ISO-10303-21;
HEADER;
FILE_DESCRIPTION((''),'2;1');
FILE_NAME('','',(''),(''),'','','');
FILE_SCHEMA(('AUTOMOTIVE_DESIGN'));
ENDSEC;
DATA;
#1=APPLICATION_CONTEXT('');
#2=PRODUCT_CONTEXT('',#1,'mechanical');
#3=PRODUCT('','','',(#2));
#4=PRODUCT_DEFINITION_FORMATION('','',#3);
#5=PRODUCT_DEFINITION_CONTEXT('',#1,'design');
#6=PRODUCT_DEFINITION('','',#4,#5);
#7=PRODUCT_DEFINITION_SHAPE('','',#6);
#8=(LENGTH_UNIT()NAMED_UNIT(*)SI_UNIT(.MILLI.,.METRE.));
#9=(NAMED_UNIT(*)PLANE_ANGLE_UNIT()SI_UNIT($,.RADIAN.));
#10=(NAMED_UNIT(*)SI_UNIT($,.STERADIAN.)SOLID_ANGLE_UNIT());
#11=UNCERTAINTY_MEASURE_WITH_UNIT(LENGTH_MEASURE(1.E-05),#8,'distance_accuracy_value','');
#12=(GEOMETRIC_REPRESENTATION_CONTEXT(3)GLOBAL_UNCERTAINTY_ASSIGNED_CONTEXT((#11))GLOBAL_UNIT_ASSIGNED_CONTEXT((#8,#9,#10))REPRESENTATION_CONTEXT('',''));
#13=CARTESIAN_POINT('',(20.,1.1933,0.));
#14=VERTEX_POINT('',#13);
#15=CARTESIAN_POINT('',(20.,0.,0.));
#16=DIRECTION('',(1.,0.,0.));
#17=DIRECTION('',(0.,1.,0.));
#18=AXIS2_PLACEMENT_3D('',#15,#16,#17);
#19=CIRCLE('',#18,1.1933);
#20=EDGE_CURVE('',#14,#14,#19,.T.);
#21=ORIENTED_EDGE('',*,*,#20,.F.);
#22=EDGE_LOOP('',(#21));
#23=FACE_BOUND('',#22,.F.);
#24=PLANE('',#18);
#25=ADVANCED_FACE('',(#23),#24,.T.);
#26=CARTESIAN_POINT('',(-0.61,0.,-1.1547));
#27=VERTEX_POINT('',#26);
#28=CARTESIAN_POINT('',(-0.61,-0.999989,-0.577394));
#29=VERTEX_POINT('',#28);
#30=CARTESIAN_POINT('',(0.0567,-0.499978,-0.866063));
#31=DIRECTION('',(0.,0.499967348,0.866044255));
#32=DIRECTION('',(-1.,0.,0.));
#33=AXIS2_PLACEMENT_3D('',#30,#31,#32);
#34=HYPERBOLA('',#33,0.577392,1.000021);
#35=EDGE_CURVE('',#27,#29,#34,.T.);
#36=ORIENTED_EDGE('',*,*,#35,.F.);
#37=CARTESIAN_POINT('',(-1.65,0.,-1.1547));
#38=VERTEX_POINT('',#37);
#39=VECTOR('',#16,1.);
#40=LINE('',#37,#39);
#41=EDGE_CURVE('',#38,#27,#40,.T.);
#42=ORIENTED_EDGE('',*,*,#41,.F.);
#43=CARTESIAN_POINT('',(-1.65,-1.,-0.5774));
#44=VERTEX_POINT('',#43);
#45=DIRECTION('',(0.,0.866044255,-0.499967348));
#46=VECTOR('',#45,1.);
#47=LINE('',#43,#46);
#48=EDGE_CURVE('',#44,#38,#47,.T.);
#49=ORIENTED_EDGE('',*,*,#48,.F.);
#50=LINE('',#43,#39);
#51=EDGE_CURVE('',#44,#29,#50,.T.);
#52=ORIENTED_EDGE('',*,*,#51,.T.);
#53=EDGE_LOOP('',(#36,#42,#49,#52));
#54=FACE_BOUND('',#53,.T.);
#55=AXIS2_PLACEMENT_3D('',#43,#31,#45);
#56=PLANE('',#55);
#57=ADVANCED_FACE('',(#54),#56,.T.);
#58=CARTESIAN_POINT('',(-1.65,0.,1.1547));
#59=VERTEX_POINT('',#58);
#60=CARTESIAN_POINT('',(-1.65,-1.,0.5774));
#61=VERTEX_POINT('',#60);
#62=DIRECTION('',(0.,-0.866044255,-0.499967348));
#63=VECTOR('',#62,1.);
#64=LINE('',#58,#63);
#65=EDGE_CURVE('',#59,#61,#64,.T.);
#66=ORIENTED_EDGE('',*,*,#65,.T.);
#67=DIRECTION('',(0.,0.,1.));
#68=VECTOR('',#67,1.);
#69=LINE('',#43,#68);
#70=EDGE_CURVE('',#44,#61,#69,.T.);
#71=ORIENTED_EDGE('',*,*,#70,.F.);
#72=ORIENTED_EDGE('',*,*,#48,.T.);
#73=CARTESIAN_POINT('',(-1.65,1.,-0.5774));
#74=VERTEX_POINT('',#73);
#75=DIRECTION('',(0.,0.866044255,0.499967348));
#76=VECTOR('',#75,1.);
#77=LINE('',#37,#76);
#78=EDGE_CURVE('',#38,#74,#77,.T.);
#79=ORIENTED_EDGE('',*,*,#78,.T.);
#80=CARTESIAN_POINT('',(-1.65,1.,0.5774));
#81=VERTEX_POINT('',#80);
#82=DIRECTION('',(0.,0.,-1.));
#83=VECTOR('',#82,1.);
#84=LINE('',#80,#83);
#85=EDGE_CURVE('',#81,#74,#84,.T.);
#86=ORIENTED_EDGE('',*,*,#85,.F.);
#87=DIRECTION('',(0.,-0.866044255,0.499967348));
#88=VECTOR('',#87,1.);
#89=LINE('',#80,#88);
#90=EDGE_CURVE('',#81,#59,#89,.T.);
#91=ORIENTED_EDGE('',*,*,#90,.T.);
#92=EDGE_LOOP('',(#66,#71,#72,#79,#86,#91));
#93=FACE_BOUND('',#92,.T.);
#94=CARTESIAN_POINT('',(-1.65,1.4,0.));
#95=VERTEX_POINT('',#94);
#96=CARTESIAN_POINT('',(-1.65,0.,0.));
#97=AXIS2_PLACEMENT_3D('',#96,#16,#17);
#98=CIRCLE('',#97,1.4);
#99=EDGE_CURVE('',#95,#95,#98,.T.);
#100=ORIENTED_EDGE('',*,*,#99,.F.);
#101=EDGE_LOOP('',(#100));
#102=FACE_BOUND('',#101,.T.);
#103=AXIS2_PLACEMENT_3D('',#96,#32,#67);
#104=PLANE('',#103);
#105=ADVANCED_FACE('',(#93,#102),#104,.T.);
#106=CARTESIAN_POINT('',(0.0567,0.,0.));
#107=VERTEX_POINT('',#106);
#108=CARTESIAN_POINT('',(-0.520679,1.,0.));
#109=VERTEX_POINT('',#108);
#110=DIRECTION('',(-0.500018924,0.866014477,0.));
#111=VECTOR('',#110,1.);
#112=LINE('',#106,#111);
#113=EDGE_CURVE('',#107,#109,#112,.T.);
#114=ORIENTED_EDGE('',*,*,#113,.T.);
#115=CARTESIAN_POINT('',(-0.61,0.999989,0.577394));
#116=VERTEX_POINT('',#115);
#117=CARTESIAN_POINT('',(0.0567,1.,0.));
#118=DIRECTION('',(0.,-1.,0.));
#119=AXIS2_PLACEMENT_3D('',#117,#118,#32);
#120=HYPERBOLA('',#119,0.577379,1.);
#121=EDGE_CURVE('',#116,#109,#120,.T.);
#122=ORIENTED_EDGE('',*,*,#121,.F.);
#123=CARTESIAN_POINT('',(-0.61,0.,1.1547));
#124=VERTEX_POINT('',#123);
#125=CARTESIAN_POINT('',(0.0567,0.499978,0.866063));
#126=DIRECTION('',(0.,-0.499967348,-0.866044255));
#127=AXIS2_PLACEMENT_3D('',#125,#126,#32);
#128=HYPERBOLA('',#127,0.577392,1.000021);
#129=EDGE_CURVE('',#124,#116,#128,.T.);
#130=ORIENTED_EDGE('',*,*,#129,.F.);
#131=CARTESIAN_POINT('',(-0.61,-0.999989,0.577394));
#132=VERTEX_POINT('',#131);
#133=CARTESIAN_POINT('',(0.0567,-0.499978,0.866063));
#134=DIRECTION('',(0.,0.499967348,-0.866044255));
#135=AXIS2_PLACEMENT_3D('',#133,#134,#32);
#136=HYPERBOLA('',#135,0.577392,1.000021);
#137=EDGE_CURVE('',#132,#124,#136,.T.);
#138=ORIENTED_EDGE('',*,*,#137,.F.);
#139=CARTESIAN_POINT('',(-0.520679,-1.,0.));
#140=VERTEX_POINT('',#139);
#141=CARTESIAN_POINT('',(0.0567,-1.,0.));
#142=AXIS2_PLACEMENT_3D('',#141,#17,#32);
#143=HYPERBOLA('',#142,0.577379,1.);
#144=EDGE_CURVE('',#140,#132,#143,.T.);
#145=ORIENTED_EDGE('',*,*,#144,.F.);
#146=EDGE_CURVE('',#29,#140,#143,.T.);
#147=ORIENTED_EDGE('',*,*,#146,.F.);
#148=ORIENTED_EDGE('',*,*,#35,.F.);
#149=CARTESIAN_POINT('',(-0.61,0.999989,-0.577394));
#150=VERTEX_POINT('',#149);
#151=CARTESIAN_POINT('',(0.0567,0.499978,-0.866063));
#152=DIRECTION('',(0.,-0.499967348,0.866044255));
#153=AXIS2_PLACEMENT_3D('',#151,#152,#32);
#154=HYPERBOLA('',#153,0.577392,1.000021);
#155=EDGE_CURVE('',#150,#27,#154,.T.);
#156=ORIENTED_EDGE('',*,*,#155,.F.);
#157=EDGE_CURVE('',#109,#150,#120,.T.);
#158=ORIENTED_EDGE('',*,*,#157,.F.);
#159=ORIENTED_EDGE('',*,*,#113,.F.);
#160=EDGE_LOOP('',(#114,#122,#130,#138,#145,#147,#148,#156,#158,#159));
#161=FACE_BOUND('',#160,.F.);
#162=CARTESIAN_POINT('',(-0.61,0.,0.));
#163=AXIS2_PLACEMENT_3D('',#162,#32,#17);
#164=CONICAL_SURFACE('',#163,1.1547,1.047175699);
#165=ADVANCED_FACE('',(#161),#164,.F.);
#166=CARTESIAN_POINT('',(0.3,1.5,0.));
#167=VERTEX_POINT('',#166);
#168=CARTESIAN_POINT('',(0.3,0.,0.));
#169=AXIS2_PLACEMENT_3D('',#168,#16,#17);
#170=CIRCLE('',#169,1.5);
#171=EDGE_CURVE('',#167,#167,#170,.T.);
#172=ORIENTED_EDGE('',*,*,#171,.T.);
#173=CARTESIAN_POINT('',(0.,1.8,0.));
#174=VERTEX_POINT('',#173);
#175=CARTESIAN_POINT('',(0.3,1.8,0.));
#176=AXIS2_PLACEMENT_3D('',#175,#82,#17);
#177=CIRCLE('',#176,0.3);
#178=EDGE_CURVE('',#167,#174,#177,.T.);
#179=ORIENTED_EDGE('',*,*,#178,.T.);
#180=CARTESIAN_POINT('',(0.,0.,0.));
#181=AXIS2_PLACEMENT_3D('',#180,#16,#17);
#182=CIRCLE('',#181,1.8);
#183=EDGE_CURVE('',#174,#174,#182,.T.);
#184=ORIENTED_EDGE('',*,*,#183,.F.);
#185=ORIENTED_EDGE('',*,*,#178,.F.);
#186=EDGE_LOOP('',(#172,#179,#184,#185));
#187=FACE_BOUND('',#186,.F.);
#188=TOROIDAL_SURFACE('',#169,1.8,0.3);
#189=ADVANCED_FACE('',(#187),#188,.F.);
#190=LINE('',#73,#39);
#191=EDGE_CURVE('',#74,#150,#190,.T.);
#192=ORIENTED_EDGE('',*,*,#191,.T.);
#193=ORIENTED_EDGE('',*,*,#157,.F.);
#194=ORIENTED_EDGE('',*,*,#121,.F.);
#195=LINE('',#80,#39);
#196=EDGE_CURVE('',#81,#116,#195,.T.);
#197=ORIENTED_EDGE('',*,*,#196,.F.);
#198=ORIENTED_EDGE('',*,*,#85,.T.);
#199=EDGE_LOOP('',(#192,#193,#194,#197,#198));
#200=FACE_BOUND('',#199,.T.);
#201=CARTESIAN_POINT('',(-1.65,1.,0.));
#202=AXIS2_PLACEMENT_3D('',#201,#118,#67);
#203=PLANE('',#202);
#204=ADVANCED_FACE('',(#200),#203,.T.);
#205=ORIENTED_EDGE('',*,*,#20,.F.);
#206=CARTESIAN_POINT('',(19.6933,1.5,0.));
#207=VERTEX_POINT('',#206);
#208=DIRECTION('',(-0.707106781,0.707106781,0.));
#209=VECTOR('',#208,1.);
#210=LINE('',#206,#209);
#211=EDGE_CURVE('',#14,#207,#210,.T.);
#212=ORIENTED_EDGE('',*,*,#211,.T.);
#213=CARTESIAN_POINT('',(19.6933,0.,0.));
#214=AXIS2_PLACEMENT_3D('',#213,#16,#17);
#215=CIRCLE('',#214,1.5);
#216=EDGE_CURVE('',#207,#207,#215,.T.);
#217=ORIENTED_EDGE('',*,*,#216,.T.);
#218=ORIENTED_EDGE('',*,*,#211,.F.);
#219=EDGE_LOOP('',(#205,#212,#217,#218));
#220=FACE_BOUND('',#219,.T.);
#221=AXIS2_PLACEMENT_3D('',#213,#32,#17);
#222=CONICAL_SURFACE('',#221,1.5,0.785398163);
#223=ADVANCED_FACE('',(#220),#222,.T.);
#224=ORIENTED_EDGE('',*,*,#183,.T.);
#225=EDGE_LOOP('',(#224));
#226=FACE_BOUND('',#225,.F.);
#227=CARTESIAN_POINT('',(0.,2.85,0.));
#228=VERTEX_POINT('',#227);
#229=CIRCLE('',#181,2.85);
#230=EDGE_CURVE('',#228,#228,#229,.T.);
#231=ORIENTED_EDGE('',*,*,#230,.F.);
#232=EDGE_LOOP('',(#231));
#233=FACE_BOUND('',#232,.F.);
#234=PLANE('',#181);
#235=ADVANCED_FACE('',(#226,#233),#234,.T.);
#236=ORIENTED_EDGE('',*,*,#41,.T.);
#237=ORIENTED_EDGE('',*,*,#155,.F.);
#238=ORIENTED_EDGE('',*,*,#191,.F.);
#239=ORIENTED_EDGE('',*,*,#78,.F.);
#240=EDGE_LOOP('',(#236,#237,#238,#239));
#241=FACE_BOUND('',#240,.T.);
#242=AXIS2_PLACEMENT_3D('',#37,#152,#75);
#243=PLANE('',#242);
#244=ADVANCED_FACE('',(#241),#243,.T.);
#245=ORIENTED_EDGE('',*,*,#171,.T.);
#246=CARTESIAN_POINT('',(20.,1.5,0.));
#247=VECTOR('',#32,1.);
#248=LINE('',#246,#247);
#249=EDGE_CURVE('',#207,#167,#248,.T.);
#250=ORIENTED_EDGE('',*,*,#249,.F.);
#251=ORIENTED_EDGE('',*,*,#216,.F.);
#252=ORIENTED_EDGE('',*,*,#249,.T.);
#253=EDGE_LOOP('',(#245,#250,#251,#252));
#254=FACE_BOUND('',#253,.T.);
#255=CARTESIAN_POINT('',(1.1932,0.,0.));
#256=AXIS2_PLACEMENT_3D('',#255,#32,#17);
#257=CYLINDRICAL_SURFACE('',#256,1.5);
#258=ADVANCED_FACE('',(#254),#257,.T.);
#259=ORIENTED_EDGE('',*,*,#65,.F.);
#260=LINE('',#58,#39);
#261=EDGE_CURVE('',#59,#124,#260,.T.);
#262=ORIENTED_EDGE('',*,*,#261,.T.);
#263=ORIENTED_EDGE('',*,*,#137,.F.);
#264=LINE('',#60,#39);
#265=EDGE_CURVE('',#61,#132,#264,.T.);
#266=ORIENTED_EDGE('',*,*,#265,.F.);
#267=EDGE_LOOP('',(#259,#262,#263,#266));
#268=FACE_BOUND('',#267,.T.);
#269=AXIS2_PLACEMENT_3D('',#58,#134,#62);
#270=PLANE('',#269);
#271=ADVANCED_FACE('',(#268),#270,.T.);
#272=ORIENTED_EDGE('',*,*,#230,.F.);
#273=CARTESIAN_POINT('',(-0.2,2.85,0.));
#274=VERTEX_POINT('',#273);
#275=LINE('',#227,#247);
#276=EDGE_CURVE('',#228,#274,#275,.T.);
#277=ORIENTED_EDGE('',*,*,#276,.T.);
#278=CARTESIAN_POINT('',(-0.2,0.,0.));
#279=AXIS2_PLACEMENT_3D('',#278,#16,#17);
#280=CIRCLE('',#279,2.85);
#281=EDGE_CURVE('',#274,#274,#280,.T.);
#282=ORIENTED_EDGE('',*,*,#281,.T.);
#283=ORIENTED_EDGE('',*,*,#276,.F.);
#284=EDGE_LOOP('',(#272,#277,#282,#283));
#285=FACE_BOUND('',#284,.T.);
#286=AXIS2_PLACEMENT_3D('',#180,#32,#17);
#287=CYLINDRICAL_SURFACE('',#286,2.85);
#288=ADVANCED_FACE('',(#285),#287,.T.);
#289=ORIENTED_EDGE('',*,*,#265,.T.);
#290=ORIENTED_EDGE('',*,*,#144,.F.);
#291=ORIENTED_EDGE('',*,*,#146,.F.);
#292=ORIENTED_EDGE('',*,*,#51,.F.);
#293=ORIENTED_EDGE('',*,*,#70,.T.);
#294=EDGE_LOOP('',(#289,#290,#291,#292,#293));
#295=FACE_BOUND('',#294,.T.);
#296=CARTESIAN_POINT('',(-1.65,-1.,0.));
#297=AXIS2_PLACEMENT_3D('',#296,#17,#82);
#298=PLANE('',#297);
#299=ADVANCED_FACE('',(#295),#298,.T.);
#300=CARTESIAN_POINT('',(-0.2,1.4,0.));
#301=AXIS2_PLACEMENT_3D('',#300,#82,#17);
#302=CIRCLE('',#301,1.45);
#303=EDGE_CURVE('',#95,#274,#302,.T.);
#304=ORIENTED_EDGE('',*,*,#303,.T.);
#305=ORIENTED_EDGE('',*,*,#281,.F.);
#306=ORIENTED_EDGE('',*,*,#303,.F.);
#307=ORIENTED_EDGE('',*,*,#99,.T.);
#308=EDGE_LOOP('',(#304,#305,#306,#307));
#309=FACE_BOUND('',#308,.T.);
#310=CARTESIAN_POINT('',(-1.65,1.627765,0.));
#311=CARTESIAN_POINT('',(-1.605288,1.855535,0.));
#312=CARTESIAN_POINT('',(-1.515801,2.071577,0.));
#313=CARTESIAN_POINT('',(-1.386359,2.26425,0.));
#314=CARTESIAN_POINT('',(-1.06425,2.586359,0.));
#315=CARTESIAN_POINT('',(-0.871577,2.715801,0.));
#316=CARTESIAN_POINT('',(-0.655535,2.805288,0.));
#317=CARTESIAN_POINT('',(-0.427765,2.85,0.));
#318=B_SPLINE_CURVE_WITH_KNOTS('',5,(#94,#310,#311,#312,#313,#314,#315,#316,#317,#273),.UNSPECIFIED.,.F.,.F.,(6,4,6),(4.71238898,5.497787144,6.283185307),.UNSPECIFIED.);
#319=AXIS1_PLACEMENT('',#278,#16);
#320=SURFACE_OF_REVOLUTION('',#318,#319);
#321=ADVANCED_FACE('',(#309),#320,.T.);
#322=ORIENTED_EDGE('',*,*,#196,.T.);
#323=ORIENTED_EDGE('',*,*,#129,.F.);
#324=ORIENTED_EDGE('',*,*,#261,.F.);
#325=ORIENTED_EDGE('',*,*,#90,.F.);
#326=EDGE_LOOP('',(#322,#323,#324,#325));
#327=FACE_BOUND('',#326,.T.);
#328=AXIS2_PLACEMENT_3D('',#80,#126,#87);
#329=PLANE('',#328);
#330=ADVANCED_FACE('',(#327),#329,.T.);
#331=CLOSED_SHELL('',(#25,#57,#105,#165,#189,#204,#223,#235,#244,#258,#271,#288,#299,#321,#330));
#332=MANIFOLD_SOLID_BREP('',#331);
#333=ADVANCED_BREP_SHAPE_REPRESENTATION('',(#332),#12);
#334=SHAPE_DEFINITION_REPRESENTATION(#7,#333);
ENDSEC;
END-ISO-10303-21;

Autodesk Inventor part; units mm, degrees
ref_plane "YZ Plane" through (0, 0, 0) normal (1, 0, 0) x (0, 1, 0)
ref_plane "XZ Plane" through (0, 0, 0) normal (0, 1, 0) x (-1, 0, 0)
sketch "Sketch1" plane through (0, 0, 0) normal (0, 0, 1) x (1, 0, 0)
  line L0 (0.0567, 0) -> (20, 0)
  line L1 (20, 0) -> (20, 1.5)
  line L2 (20, 1.5) -> (1.5, 1.5)
  line L3 (1.5, 1.5) -> (1.1932, 1.5)
  line L4 (1.1932, 1.5) -> (0, 1.5)
  line L5 (0, 1.5) -> (0, 2.85)
  line L6 (0, 2.85) -> (-1.65, 2.85)
  line L7 (-1.65, 2.85) -> (-1.65, 1.1547)
  line L8 (-1.65, 1.1547) -> (-0.61, 1.1547)
  line L9 (-0.61, 1.1547) -> (0.0567, 0)
  line L10 (-5.98, 0) -> (24.33, 0) projected
  line L11 (0, -0.57) -> (0, 3.42) projected
  line L12 (1.5, 1.5) -> (0, 1.5) construction
  dimension "d1" = 18.5
  dimension "d2" = 0.3068
  dimension "d3" = 1.65
  dimension "d4" = 1.04
  dimension "d5" = 60
  dimension "d6" = 3
  dimension "d7" = 3
  dimension "d8" = 2.3094
  dimension "d9" = 5.7
  dimension "d26" = 20
revolve "Body" add sketch "Sketch1" angle 360 about axis through (0.0567, 0, 0) along (1, 0, 0) contours L9 L11 L4 L3 L2 L1 L0 | L9 L8 L7 L6 L5 L11
sketch "Sketch2" plane through (-1.65, 0, 0) normal (-1, 0, 0) x (0, 0, 1)
  circle A0 centre (0, 0) radius 1.1547 projected
  line L0 (0, -3.99) -> (0, 3.99) projected
  line L1 (-3.99, 0) -> (3.99, 0) projected
  line L2 (1.1547, 0) -> (0.5774, -1)
  line L3 (0.5774, -1) -> (-0.5774, -1)
  line L4 (-0.5774, -1) -> (-1.1547, 0)
  line L5 (-1.1547, 0) -> (-0.5774, 1)
  line L6 (-0.5774, 1) -> (0.5774, 1)
  line L7 (0.5774, 1) -> (1.1547, 0)
extrude "Slot" add sketch "Sketch2" against normal up to next contours L7 A0 | A0 L2 | L6 L0 A0 | A0 L0 L3 | L0 L6 A0 | A0 L3 L0 | L4 A0 | A0 L5
fillet "Fillet1" radius 1.45 1 edges at (-1.65, -2.85, 0)
thread "Thread" size "M3x0.5" class "6g" standard "ISO Metric profile" length 18.5
chamfer "Chamfer1" distance 0.3067 distance2 0.3067 1 edges at (20, -1.5, 0) measured on face at (20, -0.7567, -0.3972)
ref_plane "Work Plane1" through (29, 0, 0) normal (0, -1, 0) x (1, 0, 0)
fillet "Fillet2" radius 0.3 1 edges at (0, -1.5, 0)
equation "\"d30\" = R"
equation "\"d17\" = RR"
equation "\"d13\" = GEL"
equation "\"d15\" = -0.5 * SPD + 0.5 * GD"
equation "\"d16\" = GUL"
equation "\"d1\" = GEL"
equation "\"d3\" = KOH"
equation "\"d4\" = INTI"
equation "\"d6\" = GD"
equation "\"d7\" = BDM"
equation "\"d8\" = 1.1547 * SW"
equation "\"d9\" = KOD"
equation "\"d26\" = NLG"
equation "\"GD\" = NND"
equation "\"NLG\" = 20"
equation "\"GEL\" = 18.5"
equation "\"KOD\" = 5.7"
equation "\"KOH\" = 1.65"
equation "\"INTI\" = 1.04"
equation "\"GAL\" = 0.61345 * PTC"
equation "\"GUL\" = 0.61345 * PTC"
equation "\"BDM\" = NND"
equation "\"SW\" = 2"
equation "\"RR\" = 1.45"
equation "\"SPD\" = NND - 1.2269 * PTC"
equation "\"R\" = 0.3"
equation "\"TOA\" = 30deg"
equation "\"GD1\" = THREADDIA - 1.2269 * PTC"
equation "\"THREADDIA\" = 3"
equation "\"PTC\" = 0.5"
equation "\"NND\" = 3"
equation "\"KOH1\" = 0.2"
equation "\"E0\" = 2.303"
properties part number "ISO 7380-1 - M3 x 20" material "Steel"
